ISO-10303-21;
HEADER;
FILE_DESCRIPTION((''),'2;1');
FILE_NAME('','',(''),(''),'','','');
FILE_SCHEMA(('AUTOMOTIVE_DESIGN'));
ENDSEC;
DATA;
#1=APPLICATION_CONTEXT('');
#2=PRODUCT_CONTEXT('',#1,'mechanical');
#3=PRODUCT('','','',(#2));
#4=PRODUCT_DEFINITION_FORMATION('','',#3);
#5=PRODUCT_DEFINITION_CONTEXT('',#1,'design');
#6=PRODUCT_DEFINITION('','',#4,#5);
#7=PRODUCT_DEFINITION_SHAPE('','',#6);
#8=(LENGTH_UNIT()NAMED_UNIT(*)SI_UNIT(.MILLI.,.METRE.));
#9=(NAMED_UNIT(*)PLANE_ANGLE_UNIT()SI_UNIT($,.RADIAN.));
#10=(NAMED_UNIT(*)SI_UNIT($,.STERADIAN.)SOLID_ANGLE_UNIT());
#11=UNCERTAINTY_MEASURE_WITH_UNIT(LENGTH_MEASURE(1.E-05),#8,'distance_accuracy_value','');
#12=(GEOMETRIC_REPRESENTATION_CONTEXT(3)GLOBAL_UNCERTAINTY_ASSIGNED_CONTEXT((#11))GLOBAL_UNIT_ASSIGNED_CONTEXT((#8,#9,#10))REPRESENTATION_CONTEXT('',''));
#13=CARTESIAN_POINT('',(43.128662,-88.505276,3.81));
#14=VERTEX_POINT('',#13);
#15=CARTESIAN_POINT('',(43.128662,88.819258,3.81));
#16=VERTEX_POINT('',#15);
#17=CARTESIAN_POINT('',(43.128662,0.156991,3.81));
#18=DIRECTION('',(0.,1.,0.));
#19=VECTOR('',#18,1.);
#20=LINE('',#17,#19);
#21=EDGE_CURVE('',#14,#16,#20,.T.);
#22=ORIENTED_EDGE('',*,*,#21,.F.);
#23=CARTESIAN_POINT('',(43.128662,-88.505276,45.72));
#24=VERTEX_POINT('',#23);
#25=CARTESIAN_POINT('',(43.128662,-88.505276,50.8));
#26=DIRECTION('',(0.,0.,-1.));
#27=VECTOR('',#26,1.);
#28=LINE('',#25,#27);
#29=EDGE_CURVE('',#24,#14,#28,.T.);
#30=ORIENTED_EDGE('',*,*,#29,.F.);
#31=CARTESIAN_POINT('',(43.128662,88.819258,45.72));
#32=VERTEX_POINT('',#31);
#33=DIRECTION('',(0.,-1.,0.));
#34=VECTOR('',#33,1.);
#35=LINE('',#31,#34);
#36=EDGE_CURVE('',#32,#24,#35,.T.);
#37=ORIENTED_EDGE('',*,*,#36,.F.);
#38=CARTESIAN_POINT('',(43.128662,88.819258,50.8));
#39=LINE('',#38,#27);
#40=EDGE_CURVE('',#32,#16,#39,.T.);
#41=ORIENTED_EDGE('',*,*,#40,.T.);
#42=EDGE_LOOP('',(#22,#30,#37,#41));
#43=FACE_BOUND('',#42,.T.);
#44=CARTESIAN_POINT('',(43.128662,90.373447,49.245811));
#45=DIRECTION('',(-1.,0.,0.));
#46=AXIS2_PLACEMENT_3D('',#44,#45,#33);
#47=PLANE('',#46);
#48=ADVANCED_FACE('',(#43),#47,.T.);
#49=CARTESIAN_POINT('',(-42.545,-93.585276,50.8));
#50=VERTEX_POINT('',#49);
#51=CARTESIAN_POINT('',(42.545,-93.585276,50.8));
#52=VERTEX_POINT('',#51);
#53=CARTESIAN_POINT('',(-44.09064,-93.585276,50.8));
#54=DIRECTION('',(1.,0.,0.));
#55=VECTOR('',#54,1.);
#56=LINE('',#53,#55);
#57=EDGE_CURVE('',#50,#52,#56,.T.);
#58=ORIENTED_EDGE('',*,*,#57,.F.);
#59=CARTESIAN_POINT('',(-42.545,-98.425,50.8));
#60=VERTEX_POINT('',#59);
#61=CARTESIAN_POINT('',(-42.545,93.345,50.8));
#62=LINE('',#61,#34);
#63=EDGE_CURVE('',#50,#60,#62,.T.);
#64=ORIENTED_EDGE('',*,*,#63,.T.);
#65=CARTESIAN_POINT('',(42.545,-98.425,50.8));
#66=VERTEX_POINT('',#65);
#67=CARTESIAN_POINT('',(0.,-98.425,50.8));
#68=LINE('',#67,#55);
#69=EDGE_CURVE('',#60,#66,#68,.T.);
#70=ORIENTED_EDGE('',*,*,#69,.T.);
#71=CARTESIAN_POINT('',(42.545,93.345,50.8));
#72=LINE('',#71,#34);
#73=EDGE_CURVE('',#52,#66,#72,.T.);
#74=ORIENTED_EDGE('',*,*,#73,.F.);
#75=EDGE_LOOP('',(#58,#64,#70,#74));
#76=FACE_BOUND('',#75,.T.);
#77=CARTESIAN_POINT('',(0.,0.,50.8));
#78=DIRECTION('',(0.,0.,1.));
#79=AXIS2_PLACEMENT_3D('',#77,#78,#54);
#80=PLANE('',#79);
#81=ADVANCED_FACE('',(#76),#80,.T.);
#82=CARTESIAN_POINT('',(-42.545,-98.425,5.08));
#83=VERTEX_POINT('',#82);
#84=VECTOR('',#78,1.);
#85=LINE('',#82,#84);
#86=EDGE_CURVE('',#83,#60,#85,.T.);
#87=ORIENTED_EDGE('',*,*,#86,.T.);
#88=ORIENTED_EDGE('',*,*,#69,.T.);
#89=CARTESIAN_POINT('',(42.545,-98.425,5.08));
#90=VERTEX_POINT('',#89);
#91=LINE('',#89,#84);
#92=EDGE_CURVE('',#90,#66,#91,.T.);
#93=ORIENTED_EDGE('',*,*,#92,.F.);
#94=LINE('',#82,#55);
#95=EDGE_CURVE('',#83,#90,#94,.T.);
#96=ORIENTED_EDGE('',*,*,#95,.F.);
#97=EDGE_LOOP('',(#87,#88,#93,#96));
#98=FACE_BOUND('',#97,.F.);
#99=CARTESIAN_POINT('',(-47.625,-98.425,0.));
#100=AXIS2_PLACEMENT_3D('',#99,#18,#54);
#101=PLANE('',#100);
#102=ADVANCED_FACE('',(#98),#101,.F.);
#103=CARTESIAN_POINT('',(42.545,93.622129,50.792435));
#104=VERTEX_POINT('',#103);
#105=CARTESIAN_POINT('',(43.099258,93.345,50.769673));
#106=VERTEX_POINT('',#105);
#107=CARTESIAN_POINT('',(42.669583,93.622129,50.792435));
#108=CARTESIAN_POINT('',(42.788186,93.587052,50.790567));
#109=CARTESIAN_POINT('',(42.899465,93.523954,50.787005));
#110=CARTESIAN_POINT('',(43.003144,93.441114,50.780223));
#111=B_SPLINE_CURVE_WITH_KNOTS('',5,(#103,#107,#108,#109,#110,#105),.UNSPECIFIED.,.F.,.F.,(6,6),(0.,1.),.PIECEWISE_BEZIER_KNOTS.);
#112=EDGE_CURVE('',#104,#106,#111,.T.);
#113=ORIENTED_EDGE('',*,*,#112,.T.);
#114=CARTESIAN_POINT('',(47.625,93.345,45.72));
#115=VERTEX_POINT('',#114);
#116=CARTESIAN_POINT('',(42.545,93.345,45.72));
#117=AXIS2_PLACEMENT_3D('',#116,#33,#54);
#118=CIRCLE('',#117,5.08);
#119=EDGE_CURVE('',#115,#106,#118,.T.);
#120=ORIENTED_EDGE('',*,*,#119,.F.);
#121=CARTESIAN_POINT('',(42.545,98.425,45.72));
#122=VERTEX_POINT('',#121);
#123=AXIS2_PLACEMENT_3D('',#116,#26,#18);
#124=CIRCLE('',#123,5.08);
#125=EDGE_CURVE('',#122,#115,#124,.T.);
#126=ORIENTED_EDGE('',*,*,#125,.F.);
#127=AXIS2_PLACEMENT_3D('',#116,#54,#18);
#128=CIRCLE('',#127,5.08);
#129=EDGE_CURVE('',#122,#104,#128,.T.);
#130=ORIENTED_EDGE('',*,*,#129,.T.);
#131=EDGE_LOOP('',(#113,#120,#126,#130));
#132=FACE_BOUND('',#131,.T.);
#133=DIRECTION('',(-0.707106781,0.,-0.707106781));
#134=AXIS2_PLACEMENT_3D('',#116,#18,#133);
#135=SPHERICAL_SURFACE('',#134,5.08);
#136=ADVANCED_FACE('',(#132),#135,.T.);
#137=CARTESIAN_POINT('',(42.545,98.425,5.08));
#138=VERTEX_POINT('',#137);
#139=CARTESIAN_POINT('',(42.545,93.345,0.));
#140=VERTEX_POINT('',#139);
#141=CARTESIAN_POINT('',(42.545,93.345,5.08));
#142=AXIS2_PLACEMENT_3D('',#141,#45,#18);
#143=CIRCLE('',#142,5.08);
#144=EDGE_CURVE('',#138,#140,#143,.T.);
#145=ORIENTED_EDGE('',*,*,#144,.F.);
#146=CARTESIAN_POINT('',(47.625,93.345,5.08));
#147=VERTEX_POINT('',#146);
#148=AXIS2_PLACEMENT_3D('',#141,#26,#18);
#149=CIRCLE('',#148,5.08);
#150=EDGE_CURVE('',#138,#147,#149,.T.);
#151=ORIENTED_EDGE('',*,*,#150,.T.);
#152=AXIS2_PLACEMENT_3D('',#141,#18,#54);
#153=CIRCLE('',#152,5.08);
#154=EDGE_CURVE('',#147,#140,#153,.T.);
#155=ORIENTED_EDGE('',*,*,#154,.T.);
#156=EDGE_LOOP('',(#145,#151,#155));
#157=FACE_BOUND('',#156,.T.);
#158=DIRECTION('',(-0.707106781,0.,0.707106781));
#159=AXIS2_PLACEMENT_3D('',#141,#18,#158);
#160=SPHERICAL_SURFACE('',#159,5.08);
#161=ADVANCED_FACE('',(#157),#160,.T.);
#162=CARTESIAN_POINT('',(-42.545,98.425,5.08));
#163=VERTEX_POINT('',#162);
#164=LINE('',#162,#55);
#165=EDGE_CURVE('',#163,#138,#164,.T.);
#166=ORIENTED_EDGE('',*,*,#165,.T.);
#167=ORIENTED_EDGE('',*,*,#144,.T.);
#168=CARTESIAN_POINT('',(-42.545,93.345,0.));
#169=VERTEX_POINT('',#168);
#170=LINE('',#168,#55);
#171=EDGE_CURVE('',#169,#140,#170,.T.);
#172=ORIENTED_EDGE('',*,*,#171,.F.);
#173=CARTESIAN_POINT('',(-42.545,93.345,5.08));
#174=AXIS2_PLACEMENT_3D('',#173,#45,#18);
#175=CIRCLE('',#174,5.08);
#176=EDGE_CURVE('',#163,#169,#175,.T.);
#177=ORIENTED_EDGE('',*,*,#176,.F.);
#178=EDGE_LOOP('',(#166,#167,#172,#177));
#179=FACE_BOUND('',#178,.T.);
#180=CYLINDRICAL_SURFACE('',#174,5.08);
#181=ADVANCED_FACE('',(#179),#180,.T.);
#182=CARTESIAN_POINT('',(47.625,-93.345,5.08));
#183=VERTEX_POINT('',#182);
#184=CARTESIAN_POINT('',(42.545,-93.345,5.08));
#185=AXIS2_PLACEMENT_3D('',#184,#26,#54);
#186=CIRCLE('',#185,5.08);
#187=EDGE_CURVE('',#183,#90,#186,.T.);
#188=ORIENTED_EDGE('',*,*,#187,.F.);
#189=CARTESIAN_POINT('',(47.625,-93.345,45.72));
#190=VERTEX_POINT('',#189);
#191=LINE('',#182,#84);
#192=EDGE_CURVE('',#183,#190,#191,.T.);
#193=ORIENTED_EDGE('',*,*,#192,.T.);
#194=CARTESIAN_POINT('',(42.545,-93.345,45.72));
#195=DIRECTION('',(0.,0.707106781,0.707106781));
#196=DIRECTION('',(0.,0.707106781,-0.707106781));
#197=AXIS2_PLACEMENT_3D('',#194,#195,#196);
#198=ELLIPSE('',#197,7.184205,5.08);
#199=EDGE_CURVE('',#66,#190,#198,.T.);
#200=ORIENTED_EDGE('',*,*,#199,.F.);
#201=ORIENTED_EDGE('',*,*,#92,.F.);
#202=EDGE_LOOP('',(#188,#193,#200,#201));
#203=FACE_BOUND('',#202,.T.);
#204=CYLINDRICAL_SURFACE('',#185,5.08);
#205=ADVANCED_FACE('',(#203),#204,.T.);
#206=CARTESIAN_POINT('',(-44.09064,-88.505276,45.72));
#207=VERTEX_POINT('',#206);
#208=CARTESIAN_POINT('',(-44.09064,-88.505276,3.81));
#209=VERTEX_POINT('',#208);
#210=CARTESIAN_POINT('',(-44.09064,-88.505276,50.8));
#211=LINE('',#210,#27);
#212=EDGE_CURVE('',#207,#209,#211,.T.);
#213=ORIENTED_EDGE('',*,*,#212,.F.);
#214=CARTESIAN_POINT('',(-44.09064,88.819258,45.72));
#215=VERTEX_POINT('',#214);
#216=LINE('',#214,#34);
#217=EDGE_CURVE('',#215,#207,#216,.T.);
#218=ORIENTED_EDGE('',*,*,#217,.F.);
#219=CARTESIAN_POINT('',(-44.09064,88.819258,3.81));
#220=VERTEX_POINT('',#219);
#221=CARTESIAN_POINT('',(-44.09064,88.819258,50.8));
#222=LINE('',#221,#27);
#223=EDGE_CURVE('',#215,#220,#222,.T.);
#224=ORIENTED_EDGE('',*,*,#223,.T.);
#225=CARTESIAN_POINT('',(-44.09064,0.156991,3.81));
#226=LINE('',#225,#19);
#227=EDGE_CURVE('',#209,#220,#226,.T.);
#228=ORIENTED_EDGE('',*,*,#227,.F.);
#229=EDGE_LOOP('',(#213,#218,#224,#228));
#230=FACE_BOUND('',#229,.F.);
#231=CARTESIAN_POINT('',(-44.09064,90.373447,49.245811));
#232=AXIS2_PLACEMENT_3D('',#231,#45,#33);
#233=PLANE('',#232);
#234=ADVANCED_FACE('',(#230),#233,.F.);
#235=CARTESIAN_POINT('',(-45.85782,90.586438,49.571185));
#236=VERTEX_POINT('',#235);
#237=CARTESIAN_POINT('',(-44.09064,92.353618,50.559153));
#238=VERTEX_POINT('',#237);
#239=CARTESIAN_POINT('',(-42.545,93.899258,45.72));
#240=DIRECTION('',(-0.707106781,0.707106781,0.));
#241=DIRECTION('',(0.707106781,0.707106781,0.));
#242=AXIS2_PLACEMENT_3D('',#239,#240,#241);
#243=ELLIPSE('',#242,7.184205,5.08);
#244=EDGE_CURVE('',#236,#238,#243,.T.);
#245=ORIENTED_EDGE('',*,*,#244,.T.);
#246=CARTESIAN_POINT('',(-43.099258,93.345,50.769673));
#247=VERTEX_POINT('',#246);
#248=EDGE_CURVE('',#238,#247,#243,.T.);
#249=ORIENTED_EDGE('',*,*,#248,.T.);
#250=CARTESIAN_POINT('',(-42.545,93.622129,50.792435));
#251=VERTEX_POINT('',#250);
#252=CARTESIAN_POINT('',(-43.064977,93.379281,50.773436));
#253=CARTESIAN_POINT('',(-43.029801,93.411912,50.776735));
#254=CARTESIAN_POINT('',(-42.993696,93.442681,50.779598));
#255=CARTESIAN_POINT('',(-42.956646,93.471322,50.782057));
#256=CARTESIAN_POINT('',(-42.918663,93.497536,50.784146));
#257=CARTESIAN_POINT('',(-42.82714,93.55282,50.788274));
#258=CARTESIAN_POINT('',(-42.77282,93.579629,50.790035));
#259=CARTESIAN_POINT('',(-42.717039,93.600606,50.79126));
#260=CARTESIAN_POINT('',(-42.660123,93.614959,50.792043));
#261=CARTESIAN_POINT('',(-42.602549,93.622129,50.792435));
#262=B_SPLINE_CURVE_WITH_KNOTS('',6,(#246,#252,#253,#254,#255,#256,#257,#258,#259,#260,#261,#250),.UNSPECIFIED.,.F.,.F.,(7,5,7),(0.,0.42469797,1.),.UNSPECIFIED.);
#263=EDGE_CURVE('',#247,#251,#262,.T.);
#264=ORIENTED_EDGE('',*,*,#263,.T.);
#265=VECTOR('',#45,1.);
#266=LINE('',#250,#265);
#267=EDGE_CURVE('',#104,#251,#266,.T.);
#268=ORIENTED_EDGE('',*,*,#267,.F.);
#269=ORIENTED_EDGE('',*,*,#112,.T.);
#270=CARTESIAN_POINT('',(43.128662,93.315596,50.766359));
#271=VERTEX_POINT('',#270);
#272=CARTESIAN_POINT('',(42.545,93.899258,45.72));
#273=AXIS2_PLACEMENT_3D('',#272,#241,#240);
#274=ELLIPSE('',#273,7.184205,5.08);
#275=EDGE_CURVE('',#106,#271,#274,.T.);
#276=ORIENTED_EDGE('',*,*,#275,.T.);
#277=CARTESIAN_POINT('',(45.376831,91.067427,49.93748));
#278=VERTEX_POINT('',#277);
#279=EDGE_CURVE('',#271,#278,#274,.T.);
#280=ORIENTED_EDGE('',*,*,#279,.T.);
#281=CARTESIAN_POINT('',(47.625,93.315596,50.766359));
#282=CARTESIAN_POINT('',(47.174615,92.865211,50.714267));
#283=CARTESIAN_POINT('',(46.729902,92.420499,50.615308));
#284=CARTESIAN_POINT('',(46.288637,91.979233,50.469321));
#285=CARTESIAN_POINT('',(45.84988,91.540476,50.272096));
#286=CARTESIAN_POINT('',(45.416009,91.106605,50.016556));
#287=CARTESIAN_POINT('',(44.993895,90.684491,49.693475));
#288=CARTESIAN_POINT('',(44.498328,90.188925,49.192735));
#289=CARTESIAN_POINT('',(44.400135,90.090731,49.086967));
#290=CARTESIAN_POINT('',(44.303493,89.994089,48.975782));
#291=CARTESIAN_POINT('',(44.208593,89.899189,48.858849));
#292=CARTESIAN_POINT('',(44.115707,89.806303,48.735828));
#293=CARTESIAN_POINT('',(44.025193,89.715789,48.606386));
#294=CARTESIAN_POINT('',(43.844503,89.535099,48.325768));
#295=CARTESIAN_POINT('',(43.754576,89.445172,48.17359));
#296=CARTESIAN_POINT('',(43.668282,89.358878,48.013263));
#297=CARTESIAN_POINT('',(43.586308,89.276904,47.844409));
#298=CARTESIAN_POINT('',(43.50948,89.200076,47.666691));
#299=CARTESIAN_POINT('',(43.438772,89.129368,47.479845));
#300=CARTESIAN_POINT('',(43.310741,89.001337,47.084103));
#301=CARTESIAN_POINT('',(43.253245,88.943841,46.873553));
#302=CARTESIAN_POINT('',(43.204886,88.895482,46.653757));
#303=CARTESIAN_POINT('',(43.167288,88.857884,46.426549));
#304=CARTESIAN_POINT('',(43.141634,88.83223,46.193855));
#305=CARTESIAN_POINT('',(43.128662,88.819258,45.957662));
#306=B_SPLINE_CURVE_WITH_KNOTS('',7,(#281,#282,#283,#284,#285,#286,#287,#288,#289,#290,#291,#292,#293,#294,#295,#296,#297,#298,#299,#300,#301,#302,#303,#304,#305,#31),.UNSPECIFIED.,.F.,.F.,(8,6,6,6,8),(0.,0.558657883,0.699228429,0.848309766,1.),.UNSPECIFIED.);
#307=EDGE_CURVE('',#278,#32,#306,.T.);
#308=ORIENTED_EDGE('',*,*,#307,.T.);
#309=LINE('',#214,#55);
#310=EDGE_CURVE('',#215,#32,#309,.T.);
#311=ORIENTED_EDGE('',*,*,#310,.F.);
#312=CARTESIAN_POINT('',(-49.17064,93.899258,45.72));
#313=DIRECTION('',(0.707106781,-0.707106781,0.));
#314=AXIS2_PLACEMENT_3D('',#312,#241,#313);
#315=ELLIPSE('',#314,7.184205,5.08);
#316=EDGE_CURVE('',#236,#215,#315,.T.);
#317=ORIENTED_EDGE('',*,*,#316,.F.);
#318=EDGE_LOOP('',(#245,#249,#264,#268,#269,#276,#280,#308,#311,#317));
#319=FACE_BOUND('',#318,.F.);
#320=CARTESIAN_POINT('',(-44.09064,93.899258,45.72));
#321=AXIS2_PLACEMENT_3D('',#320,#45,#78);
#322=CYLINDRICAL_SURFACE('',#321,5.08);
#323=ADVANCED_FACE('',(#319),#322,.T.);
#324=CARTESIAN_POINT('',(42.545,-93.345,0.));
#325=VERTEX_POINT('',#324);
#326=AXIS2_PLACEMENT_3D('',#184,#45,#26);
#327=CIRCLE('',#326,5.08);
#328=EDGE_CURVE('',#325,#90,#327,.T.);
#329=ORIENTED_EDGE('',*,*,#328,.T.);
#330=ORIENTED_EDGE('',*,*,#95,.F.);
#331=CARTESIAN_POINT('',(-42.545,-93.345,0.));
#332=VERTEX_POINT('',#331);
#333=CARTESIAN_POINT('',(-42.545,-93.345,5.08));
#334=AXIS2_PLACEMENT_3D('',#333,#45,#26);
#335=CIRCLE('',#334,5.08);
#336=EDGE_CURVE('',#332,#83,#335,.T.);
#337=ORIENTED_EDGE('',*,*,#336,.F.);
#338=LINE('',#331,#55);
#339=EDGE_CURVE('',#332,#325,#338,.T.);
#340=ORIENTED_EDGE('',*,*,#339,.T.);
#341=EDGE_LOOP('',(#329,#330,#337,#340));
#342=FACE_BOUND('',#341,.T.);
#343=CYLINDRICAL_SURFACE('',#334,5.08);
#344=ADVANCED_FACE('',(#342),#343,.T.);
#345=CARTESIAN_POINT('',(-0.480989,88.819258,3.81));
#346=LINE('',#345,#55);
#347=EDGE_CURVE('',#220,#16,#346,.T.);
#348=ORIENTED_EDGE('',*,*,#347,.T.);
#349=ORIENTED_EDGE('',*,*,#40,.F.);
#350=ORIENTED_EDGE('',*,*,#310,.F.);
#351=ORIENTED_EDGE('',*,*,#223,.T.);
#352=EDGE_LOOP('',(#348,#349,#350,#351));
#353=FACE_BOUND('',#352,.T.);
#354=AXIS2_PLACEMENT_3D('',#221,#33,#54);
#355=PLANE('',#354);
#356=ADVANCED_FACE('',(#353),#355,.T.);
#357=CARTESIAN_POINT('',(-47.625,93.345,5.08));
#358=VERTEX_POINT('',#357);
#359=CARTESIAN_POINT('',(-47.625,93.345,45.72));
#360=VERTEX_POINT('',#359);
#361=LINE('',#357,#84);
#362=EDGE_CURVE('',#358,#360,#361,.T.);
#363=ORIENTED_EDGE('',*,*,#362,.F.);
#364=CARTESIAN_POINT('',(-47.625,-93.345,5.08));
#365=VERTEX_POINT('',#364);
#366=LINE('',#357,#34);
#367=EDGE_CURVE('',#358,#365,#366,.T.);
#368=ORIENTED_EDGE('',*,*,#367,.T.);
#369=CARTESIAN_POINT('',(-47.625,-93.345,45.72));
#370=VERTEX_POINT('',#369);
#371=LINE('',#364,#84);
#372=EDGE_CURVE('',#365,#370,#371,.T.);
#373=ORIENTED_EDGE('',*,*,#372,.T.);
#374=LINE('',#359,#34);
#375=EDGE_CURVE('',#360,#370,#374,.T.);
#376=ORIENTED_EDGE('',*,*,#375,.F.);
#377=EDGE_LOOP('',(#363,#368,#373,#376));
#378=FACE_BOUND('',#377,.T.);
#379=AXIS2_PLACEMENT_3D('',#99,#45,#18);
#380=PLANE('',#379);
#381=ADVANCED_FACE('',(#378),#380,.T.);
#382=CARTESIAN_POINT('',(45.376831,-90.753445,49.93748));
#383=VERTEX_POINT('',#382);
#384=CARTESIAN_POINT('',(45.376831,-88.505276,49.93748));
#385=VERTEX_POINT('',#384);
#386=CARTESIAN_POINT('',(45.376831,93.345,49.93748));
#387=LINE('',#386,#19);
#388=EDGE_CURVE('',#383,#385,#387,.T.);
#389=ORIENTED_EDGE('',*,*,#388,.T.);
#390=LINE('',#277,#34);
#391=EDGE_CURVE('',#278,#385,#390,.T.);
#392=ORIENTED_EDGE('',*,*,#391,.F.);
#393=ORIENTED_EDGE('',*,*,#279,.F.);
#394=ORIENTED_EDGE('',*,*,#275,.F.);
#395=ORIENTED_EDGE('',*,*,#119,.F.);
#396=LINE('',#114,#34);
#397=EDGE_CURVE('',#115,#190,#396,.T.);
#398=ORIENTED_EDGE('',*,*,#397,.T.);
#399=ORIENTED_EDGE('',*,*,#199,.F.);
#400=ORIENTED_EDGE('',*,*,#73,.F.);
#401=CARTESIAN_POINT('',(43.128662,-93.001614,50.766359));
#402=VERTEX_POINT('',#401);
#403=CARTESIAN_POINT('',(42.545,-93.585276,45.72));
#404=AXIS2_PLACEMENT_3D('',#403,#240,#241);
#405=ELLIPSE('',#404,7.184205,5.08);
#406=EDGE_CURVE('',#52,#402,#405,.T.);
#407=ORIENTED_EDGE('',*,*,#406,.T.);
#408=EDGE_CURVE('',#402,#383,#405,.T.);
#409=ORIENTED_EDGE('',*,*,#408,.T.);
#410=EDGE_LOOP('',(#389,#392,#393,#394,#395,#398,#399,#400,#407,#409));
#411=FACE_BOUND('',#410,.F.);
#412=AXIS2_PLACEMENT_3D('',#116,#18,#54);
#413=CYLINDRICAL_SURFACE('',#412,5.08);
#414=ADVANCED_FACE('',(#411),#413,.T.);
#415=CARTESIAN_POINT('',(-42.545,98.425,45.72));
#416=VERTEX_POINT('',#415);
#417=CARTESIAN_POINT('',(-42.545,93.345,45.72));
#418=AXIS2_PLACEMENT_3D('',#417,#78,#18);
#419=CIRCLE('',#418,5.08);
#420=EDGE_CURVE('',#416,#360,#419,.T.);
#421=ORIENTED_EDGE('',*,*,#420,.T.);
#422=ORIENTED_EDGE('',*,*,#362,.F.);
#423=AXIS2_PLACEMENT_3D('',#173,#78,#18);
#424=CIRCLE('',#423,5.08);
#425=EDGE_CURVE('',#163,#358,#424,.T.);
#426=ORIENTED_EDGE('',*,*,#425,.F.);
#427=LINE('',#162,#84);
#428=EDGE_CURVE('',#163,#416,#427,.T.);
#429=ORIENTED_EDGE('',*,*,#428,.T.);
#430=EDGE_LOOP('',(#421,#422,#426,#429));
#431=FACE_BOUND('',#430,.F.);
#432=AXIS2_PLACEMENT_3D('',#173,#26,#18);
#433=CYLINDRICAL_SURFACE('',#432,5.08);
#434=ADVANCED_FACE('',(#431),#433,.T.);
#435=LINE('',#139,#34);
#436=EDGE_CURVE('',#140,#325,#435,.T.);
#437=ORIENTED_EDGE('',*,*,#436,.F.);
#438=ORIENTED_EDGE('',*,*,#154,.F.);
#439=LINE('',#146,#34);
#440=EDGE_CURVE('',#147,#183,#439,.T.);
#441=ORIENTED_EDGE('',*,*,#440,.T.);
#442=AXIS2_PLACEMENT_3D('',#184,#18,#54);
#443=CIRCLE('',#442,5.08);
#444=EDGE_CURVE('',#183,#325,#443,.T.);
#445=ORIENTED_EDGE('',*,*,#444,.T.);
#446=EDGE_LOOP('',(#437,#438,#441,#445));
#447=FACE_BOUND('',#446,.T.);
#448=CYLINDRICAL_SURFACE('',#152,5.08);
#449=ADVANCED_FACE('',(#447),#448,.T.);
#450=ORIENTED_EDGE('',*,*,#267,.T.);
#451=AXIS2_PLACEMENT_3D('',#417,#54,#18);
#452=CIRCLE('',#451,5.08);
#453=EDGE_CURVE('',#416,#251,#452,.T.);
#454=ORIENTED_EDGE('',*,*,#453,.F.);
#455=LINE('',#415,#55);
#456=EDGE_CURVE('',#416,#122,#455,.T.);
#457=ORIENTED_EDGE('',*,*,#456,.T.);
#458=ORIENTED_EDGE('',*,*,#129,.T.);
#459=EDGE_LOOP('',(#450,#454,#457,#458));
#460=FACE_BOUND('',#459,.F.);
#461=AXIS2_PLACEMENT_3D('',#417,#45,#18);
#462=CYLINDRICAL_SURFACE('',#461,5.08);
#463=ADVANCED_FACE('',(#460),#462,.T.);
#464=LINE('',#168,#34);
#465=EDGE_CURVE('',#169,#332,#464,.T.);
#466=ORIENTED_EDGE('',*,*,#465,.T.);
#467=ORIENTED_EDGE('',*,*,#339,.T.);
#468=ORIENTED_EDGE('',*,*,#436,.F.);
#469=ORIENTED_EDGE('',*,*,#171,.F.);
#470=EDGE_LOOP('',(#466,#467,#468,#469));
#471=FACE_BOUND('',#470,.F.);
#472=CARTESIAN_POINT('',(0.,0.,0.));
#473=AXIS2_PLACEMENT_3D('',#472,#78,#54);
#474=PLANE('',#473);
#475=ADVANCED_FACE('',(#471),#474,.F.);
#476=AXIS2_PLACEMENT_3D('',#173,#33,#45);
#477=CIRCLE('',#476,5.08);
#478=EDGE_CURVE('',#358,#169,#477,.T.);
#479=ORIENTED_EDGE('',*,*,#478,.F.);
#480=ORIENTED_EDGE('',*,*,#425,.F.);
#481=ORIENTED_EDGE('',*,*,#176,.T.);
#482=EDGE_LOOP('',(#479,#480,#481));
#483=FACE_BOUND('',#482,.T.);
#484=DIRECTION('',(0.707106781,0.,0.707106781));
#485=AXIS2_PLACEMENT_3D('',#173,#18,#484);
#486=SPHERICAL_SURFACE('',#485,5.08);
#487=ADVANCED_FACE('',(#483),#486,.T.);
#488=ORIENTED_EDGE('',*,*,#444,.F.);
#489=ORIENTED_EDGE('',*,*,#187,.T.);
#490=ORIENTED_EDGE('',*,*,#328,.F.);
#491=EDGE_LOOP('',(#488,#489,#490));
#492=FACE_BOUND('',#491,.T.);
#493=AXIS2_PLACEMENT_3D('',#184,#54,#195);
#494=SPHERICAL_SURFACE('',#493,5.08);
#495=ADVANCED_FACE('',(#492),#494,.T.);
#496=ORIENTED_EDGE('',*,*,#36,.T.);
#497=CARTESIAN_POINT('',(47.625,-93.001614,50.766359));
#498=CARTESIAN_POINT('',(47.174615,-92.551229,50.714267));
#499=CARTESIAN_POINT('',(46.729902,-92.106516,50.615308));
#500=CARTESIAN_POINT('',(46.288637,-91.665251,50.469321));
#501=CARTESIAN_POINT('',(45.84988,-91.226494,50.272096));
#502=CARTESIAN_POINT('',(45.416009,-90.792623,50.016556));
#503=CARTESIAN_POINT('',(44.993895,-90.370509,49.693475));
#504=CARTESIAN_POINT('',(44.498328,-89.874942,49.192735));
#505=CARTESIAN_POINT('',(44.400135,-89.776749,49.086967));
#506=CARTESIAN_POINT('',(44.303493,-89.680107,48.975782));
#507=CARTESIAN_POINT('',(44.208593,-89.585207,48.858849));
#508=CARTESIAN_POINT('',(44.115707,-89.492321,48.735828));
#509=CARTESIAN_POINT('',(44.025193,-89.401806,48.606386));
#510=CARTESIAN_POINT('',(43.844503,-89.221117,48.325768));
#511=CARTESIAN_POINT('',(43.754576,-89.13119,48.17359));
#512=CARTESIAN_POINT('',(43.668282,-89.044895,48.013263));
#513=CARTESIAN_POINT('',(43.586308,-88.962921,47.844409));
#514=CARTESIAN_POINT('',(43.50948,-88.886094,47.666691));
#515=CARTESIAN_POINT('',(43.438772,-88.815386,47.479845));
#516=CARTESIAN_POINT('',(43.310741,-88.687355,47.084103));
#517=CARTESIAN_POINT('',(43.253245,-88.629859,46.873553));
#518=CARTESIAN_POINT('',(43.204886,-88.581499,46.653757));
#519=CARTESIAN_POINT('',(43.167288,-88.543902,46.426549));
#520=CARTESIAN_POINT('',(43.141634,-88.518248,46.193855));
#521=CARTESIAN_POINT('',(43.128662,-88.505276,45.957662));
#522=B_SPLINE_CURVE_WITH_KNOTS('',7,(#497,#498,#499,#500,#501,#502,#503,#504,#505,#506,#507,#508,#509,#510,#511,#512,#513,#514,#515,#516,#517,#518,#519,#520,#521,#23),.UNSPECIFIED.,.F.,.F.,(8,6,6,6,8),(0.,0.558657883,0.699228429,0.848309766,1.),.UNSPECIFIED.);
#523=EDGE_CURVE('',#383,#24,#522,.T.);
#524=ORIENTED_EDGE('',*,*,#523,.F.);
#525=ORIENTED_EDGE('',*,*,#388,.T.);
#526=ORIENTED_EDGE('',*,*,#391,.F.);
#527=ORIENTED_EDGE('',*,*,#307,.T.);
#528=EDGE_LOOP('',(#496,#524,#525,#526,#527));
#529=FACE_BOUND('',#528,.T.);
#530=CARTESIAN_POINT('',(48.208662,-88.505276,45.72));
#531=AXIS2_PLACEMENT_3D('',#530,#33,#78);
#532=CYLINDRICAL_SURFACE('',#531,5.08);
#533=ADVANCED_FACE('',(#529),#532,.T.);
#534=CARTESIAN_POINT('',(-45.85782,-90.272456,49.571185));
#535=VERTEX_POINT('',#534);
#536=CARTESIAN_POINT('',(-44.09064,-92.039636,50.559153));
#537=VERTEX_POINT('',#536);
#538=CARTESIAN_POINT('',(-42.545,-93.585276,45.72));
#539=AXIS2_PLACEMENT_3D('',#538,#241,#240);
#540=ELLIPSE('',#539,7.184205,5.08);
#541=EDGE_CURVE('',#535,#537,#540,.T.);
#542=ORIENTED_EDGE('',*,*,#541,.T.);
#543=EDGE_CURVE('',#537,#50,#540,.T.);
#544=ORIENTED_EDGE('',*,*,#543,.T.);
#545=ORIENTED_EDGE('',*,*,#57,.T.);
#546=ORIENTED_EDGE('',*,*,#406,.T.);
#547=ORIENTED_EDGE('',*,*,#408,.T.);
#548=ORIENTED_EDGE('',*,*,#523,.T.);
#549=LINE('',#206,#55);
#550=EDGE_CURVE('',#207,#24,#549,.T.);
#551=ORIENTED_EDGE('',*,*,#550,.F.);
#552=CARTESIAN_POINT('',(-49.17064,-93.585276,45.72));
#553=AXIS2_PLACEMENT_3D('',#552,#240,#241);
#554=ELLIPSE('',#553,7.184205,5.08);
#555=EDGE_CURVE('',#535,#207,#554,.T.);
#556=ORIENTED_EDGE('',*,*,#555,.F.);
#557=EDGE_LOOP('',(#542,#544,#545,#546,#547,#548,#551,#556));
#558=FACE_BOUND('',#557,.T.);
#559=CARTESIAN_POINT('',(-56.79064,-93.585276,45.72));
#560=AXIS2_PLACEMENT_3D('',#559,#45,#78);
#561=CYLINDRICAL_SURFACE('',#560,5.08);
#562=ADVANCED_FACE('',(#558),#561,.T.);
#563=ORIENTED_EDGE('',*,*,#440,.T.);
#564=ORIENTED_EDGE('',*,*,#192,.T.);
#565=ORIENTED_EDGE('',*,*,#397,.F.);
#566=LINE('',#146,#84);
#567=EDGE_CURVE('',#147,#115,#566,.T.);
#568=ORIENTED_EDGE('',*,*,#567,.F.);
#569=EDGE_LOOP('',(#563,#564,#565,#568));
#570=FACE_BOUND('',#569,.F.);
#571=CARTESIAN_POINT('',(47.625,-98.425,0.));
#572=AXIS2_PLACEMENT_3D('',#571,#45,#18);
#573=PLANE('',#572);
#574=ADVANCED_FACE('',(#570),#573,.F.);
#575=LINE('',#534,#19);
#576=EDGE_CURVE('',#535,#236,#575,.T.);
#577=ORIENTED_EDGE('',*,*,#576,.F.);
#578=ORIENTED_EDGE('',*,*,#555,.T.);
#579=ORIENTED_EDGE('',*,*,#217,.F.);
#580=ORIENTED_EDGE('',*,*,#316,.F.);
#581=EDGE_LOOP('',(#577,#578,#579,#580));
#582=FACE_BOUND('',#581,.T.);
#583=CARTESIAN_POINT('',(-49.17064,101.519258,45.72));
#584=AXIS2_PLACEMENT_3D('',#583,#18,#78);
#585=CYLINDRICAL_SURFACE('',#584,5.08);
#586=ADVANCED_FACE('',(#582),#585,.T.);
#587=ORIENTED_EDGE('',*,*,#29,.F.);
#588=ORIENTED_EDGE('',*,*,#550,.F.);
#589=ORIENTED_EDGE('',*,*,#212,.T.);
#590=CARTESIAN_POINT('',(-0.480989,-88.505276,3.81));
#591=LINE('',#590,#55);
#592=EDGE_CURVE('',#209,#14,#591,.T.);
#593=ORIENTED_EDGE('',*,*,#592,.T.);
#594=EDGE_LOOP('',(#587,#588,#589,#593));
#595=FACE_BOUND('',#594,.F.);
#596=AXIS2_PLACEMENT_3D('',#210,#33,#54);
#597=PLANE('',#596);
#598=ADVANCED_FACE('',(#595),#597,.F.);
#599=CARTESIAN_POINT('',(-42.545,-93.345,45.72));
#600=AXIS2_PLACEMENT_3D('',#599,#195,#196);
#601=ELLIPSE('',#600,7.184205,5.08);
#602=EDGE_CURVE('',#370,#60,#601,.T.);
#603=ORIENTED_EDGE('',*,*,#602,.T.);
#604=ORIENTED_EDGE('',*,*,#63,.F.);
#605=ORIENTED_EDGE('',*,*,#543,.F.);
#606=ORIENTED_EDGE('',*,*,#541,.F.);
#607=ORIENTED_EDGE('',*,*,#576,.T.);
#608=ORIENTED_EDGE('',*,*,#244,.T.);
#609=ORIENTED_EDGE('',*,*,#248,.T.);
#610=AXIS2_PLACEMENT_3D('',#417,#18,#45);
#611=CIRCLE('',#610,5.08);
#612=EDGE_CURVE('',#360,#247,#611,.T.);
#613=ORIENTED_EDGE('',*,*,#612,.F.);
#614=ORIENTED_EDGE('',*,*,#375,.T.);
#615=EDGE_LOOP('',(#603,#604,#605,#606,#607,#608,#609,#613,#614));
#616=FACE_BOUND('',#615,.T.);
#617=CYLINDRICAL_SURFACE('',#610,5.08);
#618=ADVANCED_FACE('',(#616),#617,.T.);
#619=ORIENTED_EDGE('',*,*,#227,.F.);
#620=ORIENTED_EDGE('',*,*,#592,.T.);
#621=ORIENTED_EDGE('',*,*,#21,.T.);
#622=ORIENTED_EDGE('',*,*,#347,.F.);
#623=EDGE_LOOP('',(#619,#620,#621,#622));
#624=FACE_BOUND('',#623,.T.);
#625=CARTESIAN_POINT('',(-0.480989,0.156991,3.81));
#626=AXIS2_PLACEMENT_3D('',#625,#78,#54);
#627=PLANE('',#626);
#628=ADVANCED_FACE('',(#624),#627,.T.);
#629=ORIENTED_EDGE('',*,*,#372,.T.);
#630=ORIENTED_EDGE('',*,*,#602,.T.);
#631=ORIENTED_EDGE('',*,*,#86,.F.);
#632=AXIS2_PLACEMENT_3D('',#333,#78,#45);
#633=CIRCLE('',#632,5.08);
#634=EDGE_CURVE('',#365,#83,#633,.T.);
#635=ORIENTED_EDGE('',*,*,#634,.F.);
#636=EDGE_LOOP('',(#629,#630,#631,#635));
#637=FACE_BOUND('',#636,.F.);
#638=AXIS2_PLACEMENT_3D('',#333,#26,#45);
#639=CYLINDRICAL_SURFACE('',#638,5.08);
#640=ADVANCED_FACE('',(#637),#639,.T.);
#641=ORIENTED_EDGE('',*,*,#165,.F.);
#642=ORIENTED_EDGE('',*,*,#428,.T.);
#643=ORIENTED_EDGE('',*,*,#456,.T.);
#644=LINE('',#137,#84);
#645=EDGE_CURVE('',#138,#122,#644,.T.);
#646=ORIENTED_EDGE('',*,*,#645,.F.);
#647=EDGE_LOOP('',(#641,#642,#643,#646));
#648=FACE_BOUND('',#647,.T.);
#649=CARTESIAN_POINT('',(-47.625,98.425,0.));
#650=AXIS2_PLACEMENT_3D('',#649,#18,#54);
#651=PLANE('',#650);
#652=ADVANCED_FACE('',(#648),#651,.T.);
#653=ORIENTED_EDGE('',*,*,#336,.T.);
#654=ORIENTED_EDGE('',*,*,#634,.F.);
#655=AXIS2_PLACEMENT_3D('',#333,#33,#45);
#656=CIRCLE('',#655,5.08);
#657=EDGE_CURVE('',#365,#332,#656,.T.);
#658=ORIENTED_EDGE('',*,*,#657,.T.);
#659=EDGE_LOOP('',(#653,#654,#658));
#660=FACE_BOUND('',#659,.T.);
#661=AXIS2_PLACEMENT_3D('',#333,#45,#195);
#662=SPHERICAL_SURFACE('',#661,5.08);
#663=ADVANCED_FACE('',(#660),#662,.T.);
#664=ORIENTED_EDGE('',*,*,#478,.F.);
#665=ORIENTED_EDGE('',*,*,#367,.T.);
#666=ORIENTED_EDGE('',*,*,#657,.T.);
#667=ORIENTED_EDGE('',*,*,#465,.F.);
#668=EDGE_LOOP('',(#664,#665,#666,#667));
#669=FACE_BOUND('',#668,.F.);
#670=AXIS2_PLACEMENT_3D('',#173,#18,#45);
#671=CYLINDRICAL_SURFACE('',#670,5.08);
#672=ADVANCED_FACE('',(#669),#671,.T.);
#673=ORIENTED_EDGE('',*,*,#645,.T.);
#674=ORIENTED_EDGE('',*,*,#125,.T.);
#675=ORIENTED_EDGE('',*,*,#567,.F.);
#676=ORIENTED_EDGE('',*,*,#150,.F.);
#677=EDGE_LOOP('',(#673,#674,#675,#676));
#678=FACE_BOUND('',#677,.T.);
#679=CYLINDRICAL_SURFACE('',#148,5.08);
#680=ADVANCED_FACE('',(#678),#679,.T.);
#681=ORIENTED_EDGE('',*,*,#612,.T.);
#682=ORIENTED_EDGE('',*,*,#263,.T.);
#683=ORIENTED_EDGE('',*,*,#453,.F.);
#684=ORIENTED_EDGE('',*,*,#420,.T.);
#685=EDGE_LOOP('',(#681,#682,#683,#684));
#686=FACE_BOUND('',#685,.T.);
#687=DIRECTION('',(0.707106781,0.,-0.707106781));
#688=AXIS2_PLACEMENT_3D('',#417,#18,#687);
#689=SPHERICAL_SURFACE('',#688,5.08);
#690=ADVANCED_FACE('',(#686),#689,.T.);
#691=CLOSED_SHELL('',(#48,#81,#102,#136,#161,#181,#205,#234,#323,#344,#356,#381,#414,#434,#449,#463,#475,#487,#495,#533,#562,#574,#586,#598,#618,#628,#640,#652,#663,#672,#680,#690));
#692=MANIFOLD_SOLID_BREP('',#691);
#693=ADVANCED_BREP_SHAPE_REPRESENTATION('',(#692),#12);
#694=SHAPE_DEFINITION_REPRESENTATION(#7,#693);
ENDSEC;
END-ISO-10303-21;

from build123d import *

# Parameters (mm, degrees)
F0_W          = 95.25
F0_H          = 196.85
F1_DEPTH      = 50.8
F2_W          = 87.2193016112
F2_H          = 177.3245334625
F3_DEPTH      = 46.99
F4_T1_DEPTH   = 204.47
F4_T3_DEPTH   = 85.09
F4_T5_DEPTH   = 40.64
F4_T7_DEPTH   = 186.69
F4_T9_DEPTH   = 58.42
F4_T11_DEPTH  = 87.2193016112
F4_T13_DEPTH  = 177.3245334625
F4_S17_W      = 5.1816
F4_S17_H      = 5.1816
F4_T18_DEPTH  = 5.1816
F4_S23_W      = 5.1816
F4_S23_H      = 5.1816
F4_T24_DEPTH  = 5.1816
F4_S29_W      = 5.1816
F4_S29_H      = 5.1816
F4_T30_DEPTH  = 5.1816
F4_S35_W      = 5.1816
F4_S35_H      = 5.1816
F4_T36_DEPTH  = 5.1816
F4_S41_W      = 5.1816
F4_S41_H      = 5.1816
F4_T42_DEPTH  = 5.1816
F4_S47_W      = 5.1816
F4_S47_H      = 5.1816
F4_T48_DEPTH  = 5.1816
F4_T55_DEPTH  = 99.9193016112
F4_T60_DEPTH  = 190.0245334625
F4_T69_DEPTH  = 99.9193016112
F4_T74_DEPTH  = 190.0245334625
F4_T83_DEPTH  = 190.0245334625
F4_T89_DEPTH  = 99.9193016112
F4_T97_DEPTH  = 99.9193016112
F4_T102_DEPTH = 190.0245334625


# Not quite as in the source:
# - a fillet or chamfer that OpenCascade refuses, or shapes differently, is made with other operations: its cross-section is extruded or revolved along the edge and cut away or added


with BuildPart() as f1:
    # F0 (on Top) → F1 (new body)
    with BuildSketch(Plane.XY):
        Rectangle(F0_W, F0_H)
    extrude(amount=F1_DEPTH)

    # F2 (on face) → F3 (cut)
    with BuildSketch(Plane.XY.offset(50.8)):
        with Locations((-0.4809889942, 0.1569911838)):
            Rectangle(F2_W, F2_H)
    extrude(amount=-F3_DEPTH, mode=Mode.SUBTRACT)

    # F4: fillet of radius 5.08 on 15 edges, made by hand

    # F4_s2 → F4_t1 (cut)
    with BuildSketch(Plane.XZ.offset(-93.345)):
        with BuildLine():
            ThreePointArc((-47.625, 45.72), (-46.1371024484, 49.3121024484), (-42.545, 50.8))
            Line((-42.545, 50.8), (-47.625, 50.8))
            Line((-47.625, 50.8), (-47.625, 45.72))
        make_face()
        with BuildLine():
            ThreePointArc((47.625, 45.72), (46.1371024484, 49.3121024484), (42.545, 50.8))
            Line((42.545, 50.8), (47.625, 50.8))
            Line((47.625, 50.8), (47.625, 45.72))
        make_face()
    extrude(amount=F4_T1_DEPTH, mode=Mode.SUBTRACT)

    # F4_s4 → F4_t3 (cut)
    with BuildSketch(Plane.YZ.offset(-42.545)):
        with BuildLine():
            ThreePointArc((98.425, 45.72), (96.9371024484, 49.3121024484), (93.345, 50.8))
            Line((93.345, 50.8), (98.425, 50.8))
            Line((98.425, 50.8), (98.425, 45.72))
        make_face()
        with BuildLine():
            ThreePointArc((-93.345, 0), (-96.9371024484, 1.4878975516), (-98.425, 5.08))
            Line((-98.425, 5.08), (-98.425, 0))
            Line((-98.425, 0), (-93.345, 0))
        make_face()
        with BuildLine():
            ThreePointArc((98.425, 5.08), (96.9371024484, 1.4878975516), (93.345, 0))
            Line((93.345, 0), (98.425, 0))
            Line((98.425, 0), (98.425, 5.08))
        make_face()
    extrude(amount=F4_T3_DEPTH, mode=Mode.SUBTRACT)

    # F4_s6 → F4_t5 (cut)
    with BuildSketch(Plane.XY.offset(5.08)):
        with BuildLine():
            ThreePointArc((-42.545, 98.425), (-46.1371024484, 96.9371024484), (-47.625, 93.345))
            Line((-47.625, 93.345), (-47.625, 98.425))
            Line((-47.625, 98.425), (-42.545, 98.425))
        make_face()
        with BuildLine():
            ThreePointArc((42.545, 98.425), (46.1371024484, 96.9371024484), (47.625, 93.345))
            Line((47.625, 93.345), (47.625, 98.425))
            Line((47.625, 98.425), (42.545, 98.425))
        make_face()
    extrude(amount=F4_T5_DEPTH, mode=Mode.SUBTRACT)

    # F4_s8 → F4_t7 (cut)
    with BuildSketch(Plane.XZ.offset(-93.345)):
        with BuildLine():
            ThreePointArc((-47.625, 5.08), (-46.1371024484, 1.4878975516), (-42.545, 0))
            Line((-42.545, 0), (-47.625, 0))
            Line((-47.625, 0), (-47.625, 5.08))
        make_face()
        with BuildLine():
            ThreePointArc((47.625, 5.08), (46.1371024484, 1.4878975516), (42.545, 0))
            Line((42.545, 0), (47.625, 0))
            Line((47.625, 0), (47.625, 5.08))
        make_face()
    extrude(amount=F4_T7_DEPTH, mode=Mode.SUBTRACT)

    # F4_s10 → F4_t9 (cut)
    with BuildSketch(Plane.XY.offset(5.08)):
        with BuildLine():
            ThreePointArc((-47.625, -93.345), (-46.1371024484, -96.9371024484), (-42.545, -98.425))
            Line((-42.545, -98.425), (-47.625, -98.425))
            Line((-47.625, -98.425), (-47.625, -93.345))
        make_face()
        with BuildLine():
            ThreePointArc((47.625, -93.345), (46.1371024484, -96.9371024484), (42.545, -98.425))
            Line((42.545, -98.425), (47.625, -98.425))
            Line((47.625, -98.425), (47.625, -93.345))
        make_face()
    extrude(amount=F4_T9_DEPTH, mode=Mode.SUBTRACT)

    # F4_s12 → F4_t11 (cut)
    with BuildSketch(Plane.YZ.offset(-44.0906397998)):
        with BuildLine():
            ThreePointArc((93.899257915, 50.8), (90.3071554666, 49.3121024484), (88.819257915, 45.72))
            Line((88.819257915, 45.72), (88.819257915, 50.8))
            Line((88.819257915, 50.8), (93.899257915, 50.8))
        make_face()
        with BuildLine():
            ThreePointArc((-93.5852755475, 50.8), (-89.9931730991, 49.3121024484), (-88.5052755475, 45.72))
            Line((-88.5052755475, 45.72), (-88.5052755475, 50.8))
            Line((-88.5052755475, 50.8), (-93.5852755475, 50.8))
        make_face()
    extrude(amount=F4_T11_DEPTH, mode=Mode.SUBTRACT)

    # F4_s14 → F4_t13 (cut)
    with BuildSketch(Plane.XZ.offset(-88.819257915)):
        with BuildLine():
            ThreePointArc((-49.1706397998, 50.8), (-45.5785373514, 49.3121024484), (-44.0906397998, 45.72))
            Line((-44.0906397998, 45.72), (-44.0906397998, 50.8))
            Line((-44.0906397998, 50.8), (-49.1706397998, 50.8))
        make_face()
        with BuildLine():
            ThreePointArc((48.2086618114, 50.8), (44.6165593629, 49.3121024484), (43.1286618114, 45.72))
            Line((43.1286618114, 45.72), (43.1286618114, 50.8))
            Line((43.1286618114, 50.8), (48.2086618114, 50.8))
        make_face()
    extrude(amount=F4_T13_DEPTH, mode=Mode.SUBTRACT)


with BuildPart() as f4_tool16:
    # F4_s17 → F4_t18 (new body)
    with BuildSketch(Plane.XZ.offset(-93.345)):
        with Locations((-45.1358, 48.3108)):
            Rectangle(F4_S17_W, F4_S17_H)
    extrude(amount=-F4_T18_DEPTH)

    # F4_s19 → F4_t20 (revolve, cut)
    with BuildSketch(Plane(origin=(-42.545, 93.345, 45.72), x_dir=(0.7071067812, 0, -0.7071067812), z_dir=(0.7071067812, 0, 0.7071067812))):
        with BuildLine():
            ThreePointArc((0, -5.08), (5.08, 0), (0, 5.08))
            Line((0, 5.08), (0, -5.08))
        make_face()
    revolve(axis=Axis((-42.545, 93.345, 45.72), (0, 1, 0)), mode=Mode.SUBTRACT)


with BuildPart() as f1_1:
    add(f1.part)

    # F4_t15: cut F4_tool16
    add(f4_tool16.part, mode=Mode.SUBTRACT)


with BuildPart() as f4_tool22:
    # F4_s23 → F4_t24 (new body)
    with BuildSketch(Plane.XZ.offset(-93.345)):
        with Locations((45.1358, 48.3108)):
            Rectangle(F4_S23_W, F4_S23_H)
    extrude(amount=-F4_T24_DEPTH)

    # F4_s25 → F4_t26 (revolve, cut)
    with BuildSketch(Plane(origin=(42.545, 93.345, 45.72), x_dir=(-0.7071067812, 0, -0.7071067812), z_dir=(0.7071067812, 0, -0.7071067812))):
        with BuildLine():
            ThreePointArc((0, -5.08), (5.08, 0), (0, 5.08))
            Line((0, 5.08), (0, -5.08))
        make_face()
    revolve(axis=Axis((42.545, 93.345, 45.72), (0, 1, 0)), mode=Mode.SUBTRACT)


with BuildPart() as f1_2:
    add(f1_1.part)

    # F4_t21: cut F4_tool22
    add(f4_tool22.part, mode=Mode.SUBTRACT)


with BuildPart() as f4_tool28:
    # F4_s29 → F4_t30 (new body)
    with BuildSketch(Plane.XZ.offset(-93.345)):
        with Locations((-45.1358, 2.4892)):
            Rectangle(F4_S29_W, F4_S29_H)
    extrude(amount=-F4_T30_DEPTH)

    # F4_s31 → F4_t32 (revolve, cut)
    with BuildSketch(Plane(origin=(-42.545, 93.345, 5.08), x_dir=(0.7071067812, 0, 0.7071067812), z_dir=(-0.7071067812, 0, 0.7071067812))):
        with BuildLine():
            ThreePointArc((0, -5.08), (5.08, 0), (0, 5.08))
            Line((0, 5.08), (0, -5.08))
        make_face()
    revolve(axis=Axis((-42.545, 93.345, 5.08), (0, 1, 0)), mode=Mode.SUBTRACT)


with BuildPart() as f1_3:
    add(f1_2.part)

    # F4_t27: cut F4_tool28
    add(f4_tool28.part, mode=Mode.SUBTRACT)


with BuildPart() as f4_tool34:
    # F4_s35 → F4_t36 (new body)
    with BuildSketch(Plane.YZ.offset(-42.545)):
        with Locations((-95.9358, 2.4892)):
            Rectangle(F4_S35_W, F4_S35_H)
    extrude(amount=-F4_T36_DEPTH)

    # F4_s37 → F4_t38 (revolve, cut)
    with BuildSketch(Plane(origin=(-42.545, -93.345, 5.08), x_dir=(0, 0.7071067812, 0.7071067812), z_dir=(0, -0.7071067812, 0.7071067812))):
        with BuildLine():
            ThreePointArc((0, -5.08), (5.08, 0), (0, 5.08))
            Line((0, 5.08), (0, -5.08))
        make_face()
    revolve(axis=Axis((-42.545, -93.345, 5.08), (-1, 0, 0)), mode=Mode.SUBTRACT)


with BuildPart() as f1_4:
    add(f1_3.part)

    # F4_t33: cut F4_tool34
    add(f4_tool34.part, mode=Mode.SUBTRACT)


with BuildPart() as f4_tool40:
    # F4_s41 → F4_t42 (new body)
    with BuildSketch(Plane.YZ.offset(42.545)):
        with Locations((-95.9358, 2.4892)):
            Rectangle(F4_S41_W, F4_S41_H)
    extrude(amount=F4_T42_DEPTH)

    # F4_s43 → F4_t44 (revolve, cut)
    with BuildSketch(Plane(origin=(42.545, -93.345, 5.08), x_dir=(0, 0.7071067812, 0.7071067812), z_dir=(0, 0.7071067812, -0.7071067812))):
        with BuildLine():
            ThreePointArc((0, -5.08), (5.08, 0), (0, 5.08))
            Line((0, 5.08), (0, -5.08))
        make_face()
    revolve(axis=Axis((42.545, -93.345, 5.08), (1, 0, 0)), mode=Mode.SUBTRACT)


with BuildPart() as f1_5:
    add(f1_4.part)

    # F4_t39: cut F4_tool40
    add(f4_tool40.part, mode=Mode.SUBTRACT)


with BuildPart() as f4_tool46:
    # F4_s47 → F4_t48 (new body)
    with BuildSketch(Plane.XZ.offset(-93.345)):
        with Locations((45.1358, 2.4892)):
            Rectangle(F4_S47_W, F4_S47_H)
    extrude(amount=-F4_T48_DEPTH)

    # F4_s49 → F4_t50 (revolve, cut)
    with BuildSketch(Plane(origin=(42.545, 93.345, 5.08), x_dir=(-0.7071067812, 0, 0.7071067812), z_dir=(-0.7071067812, 0, -0.7071067812))):
        with BuildLine():
            ThreePointArc((0, -5.08), (5.08, 0), (0, 5.08))
            Line((0, 5.08), (0, -5.08))
        make_face()
    revolve(axis=Axis((42.545, 93.345, 5.08), (0, 1, 0)), mode=Mode.SUBTRACT)


with BuildPart() as f1_6:
    add(f1_5.part)

    # F4_t45: cut F4_tool46
    add(f4_tool46.part, mode=Mode.SUBTRACT)


with BuildPart() as f4_tool53:
    # F4_s54 → F4_t55 (new body)
    with BuildSketch(Plane.YZ.offset(55.8286618114)):
        with BuildLine():
            ThreePointArc((93.899257915, 50.8), (90.3071554666, 49.3121024484), (88.819257915, 45.72))
            Line((88.819257915, 45.72), (88.819257915, 50.8))
            Line((88.819257915, 50.8), (93.899257915, 50.8))
        make_face()
    extrude(amount=-F4_T55_DEPTH)

    split(bisect_by=Plane.YZ.offset(47.625), keep=Keep.BOTTOM)

    split(bisect_by=Plane.YZ.offset(43.1286618114), keep=Keep.TOP)


with BuildPart() as f4_tool58:
    # F4_s59 → F4_t60 (new body)
    with BuildSketch(Plane.XZ.offset(88.5052755475)):
        with BuildLine():
            ThreePointArc((48.2086618114, 50.8), (44.6165593629, 49.3121024484), (43.1286618114, 45.72))
            Line((43.1286618114, 45.72), (43.1286618114, 50.8))
            Line((43.1286618114, 50.8), (48.2086618114, 50.8))
        make_face()
    extrude(amount=-F4_T60_DEPTH)

    split(bisect_by=Plane.XZ.offset(-98.425), keep=Keep.TOP)

    split(bisect_by=Plane.YZ.offset(47.625), keep=Keep.BOTTOM)

    split(bisect_by=Plane.XZ.offset(-88.819257915), keep=Keep.BOTTOM)


with BuildPart() as f4_tool53_1:
    add(f4_tool53.part)

    # F4_t64: intersect F4_tool58
    add(f4_tool58.part, mode=Mode.INTERSECT)


with BuildPart() as f1_7:
    add(f1_6.part)

    # F4_t51: cut F4_tool53
    add(f4_tool53_1.part, mode=Mode.SUBTRACT)


with BuildPart() as f4_tool67:
    # F4_s68 → F4_t69 (new body)
    with BuildSketch(Plane.YZ.offset(43.1286618114)):
        with BuildLine():
            ThreePointArc((93.899257915, 50.8), (90.3071554666, 49.3121024484), (88.819257915, 45.72))
            Line((88.819257915, 45.72), (88.819257915, 50.8))
            Line((88.819257915, 50.8), (93.899257915, 50.8))
        make_face()
    extrude(amount=-F4_T69_DEPTH)

    split(bisect_by=Plane.YZ.offset(-47.625), keep=Keep.TOP)

    split(bisect_by=Plane.YZ.offset(-44.0906397998), keep=Keep.BOTTOM)


with BuildPart() as f4_tool72:
    # F4_s73 → F4_t74 (new body)
    with BuildSketch(Plane.XZ.offset(-101.519257915)):
        with BuildLine():
            ThreePointArc((-49.1706397998, 50.8), (-45.5785373514, 49.3121024484), (-44.0906397998, 45.72))
            Line((-44.0906397998, 45.72), (-44.0906397998, 50.8))
            Line((-44.0906397998, 50.8), (-49.1706397998, 50.8))
        make_face()
    extrude(amount=F4_T74_DEPTH)

    split(bisect_by=Plane.XZ.offset(-98.425), keep=Keep.TOP)

    split(bisect_by=Plane.YZ.offset(-47.625), keep=Keep.TOP)

    split(bisect_by=Plane.XZ.offset(-88.819257915), keep=Keep.BOTTOM)


with BuildPart() as f4_tool67_1:
    add(f4_tool67.part)

    # F4_t78: intersect F4_tool72
    add(f4_tool72.part, mode=Mode.INTERSECT)


with BuildPart() as f1_8:
    add(f1_7.part)

    # F4_t65: cut F4_tool67
    add(f4_tool67_1.part, mode=Mode.SUBTRACT)


with BuildPart() as f4_tool81:
    # F4_s82 → F4_t83 (new body)
    with BuildSketch(Plane.XZ.offset(-88.819257915)):
        with BuildLine():
            ThreePointArc((-49.1706397998, 50.8), (-45.5785373514, 49.3121024484), (-44.0906397998, 45.72))
            Line((-44.0906397998, 45.72), (-44.0906397998, 50.8))
            Line((-44.0906397998, 50.8), (-49.1706397998, 50.8))
        make_face()
    extrude(amount=F4_T83_DEPTH)

    split(bisect_by=Plane.YZ.offset(-47.625), keep=Keep.TOP)

    split(bisect_by=Plane.XZ.offset(98.425), keep=Keep.BOTTOM)

    split(bisect_by=Plane.XZ.offset(88.5052755475), keep=Keep.TOP)


with BuildPart() as f4_tool87:
    # F4_s88 → F4_t89 (new body)
    with BuildSketch(Plane.YZ.offset(-56.7906397998)):
        with BuildLine():
            ThreePointArc((-93.5852755475, 50.8), (-89.9931730991, 49.3121024484), (-88.5052755475, 45.72))
            Line((-88.5052755475, 45.72), (-88.5052755475, 50.8))
            Line((-88.5052755475, 50.8), (-93.5852755475, 50.8))
        make_face()
    extrude(amount=F4_T89_DEPTH)

    split(bisect_by=Plane.YZ.offset(-47.625), keep=Keep.TOP)

    split(bisect_by=Plane.YZ.offset(-44.0906397998), keep=Keep.BOTTOM)


with BuildPart() as f4_tool81_1:
    add(f4_tool81.part)

    # F4_t92: intersect F4_tool87
    add(f4_tool87.part, mode=Mode.INTERSECT)


with BuildPart() as f1_9:
    add(f1_8.part)

    # F4_t79: cut F4_tool81
    add(f4_tool81_1.part, mode=Mode.SUBTRACT)


with BuildPart() as f4_tool95:
    # F4_s96 → F4_t97 (new body)
    with BuildSketch(Plane.YZ.offset(-44.0906397998)):
        with BuildLine():
            ThreePointArc((-93.5852755475, 50.8), (-89.9931730991, 49.3121024484), (-88.5052755475, 45.72))
            Line((-88.5052755475, 45.72), (-88.5052755475, 50.8))
            Line((-88.5052755475, 50.8), (-93.5852755475, 50.8))
        make_face()
    extrude(amount=F4_T97_DEPTH)

    split(bisect_by=Plane.YZ.offset(47.625), keep=Keep.BOTTOM)

    split(bisect_by=Plane.YZ.offset(43.1286618114), keep=Keep.TOP)


with BuildPart() as f4_tool100:
    # F4_s101 → F4_t102 (new body)
    with BuildSketch(Plane.XZ.offset(101.2052755475)):
        with BuildLine():
            ThreePointArc((48.2086618114, 50.8), (44.6165593629, 49.3121024484), (43.1286618114, 45.72))
            Line((43.1286618114, 45.72), (43.1286618114, 50.8))
            Line((43.1286618114, 50.8), (48.2086618114, 50.8))
        make_face()
    extrude(amount=-F4_T102_DEPTH)

    split(bisect_by=Plane.YZ.offset(47.625), keep=Keep.BOTTOM)

    split(bisect_by=Plane.XZ.offset(98.425), keep=Keep.BOTTOM)

    split(bisect_by=Plane.XZ.offset(88.5052755475), keep=Keep.TOP)


with BuildPart() as f4_tool95_1:
    add(f4_tool95.part)

    # F4_t106: intersect F4_tool100
    add(f4_tool100.part, mode=Mode.INTERSECT)


with BuildPart() as f1_10:
    add(f1_9.part)

    # F4_t93: cut F4_tool95
    add(f4_tool95_1.part, mode=Mode.SUBTRACT)


solid = f1_10.part
